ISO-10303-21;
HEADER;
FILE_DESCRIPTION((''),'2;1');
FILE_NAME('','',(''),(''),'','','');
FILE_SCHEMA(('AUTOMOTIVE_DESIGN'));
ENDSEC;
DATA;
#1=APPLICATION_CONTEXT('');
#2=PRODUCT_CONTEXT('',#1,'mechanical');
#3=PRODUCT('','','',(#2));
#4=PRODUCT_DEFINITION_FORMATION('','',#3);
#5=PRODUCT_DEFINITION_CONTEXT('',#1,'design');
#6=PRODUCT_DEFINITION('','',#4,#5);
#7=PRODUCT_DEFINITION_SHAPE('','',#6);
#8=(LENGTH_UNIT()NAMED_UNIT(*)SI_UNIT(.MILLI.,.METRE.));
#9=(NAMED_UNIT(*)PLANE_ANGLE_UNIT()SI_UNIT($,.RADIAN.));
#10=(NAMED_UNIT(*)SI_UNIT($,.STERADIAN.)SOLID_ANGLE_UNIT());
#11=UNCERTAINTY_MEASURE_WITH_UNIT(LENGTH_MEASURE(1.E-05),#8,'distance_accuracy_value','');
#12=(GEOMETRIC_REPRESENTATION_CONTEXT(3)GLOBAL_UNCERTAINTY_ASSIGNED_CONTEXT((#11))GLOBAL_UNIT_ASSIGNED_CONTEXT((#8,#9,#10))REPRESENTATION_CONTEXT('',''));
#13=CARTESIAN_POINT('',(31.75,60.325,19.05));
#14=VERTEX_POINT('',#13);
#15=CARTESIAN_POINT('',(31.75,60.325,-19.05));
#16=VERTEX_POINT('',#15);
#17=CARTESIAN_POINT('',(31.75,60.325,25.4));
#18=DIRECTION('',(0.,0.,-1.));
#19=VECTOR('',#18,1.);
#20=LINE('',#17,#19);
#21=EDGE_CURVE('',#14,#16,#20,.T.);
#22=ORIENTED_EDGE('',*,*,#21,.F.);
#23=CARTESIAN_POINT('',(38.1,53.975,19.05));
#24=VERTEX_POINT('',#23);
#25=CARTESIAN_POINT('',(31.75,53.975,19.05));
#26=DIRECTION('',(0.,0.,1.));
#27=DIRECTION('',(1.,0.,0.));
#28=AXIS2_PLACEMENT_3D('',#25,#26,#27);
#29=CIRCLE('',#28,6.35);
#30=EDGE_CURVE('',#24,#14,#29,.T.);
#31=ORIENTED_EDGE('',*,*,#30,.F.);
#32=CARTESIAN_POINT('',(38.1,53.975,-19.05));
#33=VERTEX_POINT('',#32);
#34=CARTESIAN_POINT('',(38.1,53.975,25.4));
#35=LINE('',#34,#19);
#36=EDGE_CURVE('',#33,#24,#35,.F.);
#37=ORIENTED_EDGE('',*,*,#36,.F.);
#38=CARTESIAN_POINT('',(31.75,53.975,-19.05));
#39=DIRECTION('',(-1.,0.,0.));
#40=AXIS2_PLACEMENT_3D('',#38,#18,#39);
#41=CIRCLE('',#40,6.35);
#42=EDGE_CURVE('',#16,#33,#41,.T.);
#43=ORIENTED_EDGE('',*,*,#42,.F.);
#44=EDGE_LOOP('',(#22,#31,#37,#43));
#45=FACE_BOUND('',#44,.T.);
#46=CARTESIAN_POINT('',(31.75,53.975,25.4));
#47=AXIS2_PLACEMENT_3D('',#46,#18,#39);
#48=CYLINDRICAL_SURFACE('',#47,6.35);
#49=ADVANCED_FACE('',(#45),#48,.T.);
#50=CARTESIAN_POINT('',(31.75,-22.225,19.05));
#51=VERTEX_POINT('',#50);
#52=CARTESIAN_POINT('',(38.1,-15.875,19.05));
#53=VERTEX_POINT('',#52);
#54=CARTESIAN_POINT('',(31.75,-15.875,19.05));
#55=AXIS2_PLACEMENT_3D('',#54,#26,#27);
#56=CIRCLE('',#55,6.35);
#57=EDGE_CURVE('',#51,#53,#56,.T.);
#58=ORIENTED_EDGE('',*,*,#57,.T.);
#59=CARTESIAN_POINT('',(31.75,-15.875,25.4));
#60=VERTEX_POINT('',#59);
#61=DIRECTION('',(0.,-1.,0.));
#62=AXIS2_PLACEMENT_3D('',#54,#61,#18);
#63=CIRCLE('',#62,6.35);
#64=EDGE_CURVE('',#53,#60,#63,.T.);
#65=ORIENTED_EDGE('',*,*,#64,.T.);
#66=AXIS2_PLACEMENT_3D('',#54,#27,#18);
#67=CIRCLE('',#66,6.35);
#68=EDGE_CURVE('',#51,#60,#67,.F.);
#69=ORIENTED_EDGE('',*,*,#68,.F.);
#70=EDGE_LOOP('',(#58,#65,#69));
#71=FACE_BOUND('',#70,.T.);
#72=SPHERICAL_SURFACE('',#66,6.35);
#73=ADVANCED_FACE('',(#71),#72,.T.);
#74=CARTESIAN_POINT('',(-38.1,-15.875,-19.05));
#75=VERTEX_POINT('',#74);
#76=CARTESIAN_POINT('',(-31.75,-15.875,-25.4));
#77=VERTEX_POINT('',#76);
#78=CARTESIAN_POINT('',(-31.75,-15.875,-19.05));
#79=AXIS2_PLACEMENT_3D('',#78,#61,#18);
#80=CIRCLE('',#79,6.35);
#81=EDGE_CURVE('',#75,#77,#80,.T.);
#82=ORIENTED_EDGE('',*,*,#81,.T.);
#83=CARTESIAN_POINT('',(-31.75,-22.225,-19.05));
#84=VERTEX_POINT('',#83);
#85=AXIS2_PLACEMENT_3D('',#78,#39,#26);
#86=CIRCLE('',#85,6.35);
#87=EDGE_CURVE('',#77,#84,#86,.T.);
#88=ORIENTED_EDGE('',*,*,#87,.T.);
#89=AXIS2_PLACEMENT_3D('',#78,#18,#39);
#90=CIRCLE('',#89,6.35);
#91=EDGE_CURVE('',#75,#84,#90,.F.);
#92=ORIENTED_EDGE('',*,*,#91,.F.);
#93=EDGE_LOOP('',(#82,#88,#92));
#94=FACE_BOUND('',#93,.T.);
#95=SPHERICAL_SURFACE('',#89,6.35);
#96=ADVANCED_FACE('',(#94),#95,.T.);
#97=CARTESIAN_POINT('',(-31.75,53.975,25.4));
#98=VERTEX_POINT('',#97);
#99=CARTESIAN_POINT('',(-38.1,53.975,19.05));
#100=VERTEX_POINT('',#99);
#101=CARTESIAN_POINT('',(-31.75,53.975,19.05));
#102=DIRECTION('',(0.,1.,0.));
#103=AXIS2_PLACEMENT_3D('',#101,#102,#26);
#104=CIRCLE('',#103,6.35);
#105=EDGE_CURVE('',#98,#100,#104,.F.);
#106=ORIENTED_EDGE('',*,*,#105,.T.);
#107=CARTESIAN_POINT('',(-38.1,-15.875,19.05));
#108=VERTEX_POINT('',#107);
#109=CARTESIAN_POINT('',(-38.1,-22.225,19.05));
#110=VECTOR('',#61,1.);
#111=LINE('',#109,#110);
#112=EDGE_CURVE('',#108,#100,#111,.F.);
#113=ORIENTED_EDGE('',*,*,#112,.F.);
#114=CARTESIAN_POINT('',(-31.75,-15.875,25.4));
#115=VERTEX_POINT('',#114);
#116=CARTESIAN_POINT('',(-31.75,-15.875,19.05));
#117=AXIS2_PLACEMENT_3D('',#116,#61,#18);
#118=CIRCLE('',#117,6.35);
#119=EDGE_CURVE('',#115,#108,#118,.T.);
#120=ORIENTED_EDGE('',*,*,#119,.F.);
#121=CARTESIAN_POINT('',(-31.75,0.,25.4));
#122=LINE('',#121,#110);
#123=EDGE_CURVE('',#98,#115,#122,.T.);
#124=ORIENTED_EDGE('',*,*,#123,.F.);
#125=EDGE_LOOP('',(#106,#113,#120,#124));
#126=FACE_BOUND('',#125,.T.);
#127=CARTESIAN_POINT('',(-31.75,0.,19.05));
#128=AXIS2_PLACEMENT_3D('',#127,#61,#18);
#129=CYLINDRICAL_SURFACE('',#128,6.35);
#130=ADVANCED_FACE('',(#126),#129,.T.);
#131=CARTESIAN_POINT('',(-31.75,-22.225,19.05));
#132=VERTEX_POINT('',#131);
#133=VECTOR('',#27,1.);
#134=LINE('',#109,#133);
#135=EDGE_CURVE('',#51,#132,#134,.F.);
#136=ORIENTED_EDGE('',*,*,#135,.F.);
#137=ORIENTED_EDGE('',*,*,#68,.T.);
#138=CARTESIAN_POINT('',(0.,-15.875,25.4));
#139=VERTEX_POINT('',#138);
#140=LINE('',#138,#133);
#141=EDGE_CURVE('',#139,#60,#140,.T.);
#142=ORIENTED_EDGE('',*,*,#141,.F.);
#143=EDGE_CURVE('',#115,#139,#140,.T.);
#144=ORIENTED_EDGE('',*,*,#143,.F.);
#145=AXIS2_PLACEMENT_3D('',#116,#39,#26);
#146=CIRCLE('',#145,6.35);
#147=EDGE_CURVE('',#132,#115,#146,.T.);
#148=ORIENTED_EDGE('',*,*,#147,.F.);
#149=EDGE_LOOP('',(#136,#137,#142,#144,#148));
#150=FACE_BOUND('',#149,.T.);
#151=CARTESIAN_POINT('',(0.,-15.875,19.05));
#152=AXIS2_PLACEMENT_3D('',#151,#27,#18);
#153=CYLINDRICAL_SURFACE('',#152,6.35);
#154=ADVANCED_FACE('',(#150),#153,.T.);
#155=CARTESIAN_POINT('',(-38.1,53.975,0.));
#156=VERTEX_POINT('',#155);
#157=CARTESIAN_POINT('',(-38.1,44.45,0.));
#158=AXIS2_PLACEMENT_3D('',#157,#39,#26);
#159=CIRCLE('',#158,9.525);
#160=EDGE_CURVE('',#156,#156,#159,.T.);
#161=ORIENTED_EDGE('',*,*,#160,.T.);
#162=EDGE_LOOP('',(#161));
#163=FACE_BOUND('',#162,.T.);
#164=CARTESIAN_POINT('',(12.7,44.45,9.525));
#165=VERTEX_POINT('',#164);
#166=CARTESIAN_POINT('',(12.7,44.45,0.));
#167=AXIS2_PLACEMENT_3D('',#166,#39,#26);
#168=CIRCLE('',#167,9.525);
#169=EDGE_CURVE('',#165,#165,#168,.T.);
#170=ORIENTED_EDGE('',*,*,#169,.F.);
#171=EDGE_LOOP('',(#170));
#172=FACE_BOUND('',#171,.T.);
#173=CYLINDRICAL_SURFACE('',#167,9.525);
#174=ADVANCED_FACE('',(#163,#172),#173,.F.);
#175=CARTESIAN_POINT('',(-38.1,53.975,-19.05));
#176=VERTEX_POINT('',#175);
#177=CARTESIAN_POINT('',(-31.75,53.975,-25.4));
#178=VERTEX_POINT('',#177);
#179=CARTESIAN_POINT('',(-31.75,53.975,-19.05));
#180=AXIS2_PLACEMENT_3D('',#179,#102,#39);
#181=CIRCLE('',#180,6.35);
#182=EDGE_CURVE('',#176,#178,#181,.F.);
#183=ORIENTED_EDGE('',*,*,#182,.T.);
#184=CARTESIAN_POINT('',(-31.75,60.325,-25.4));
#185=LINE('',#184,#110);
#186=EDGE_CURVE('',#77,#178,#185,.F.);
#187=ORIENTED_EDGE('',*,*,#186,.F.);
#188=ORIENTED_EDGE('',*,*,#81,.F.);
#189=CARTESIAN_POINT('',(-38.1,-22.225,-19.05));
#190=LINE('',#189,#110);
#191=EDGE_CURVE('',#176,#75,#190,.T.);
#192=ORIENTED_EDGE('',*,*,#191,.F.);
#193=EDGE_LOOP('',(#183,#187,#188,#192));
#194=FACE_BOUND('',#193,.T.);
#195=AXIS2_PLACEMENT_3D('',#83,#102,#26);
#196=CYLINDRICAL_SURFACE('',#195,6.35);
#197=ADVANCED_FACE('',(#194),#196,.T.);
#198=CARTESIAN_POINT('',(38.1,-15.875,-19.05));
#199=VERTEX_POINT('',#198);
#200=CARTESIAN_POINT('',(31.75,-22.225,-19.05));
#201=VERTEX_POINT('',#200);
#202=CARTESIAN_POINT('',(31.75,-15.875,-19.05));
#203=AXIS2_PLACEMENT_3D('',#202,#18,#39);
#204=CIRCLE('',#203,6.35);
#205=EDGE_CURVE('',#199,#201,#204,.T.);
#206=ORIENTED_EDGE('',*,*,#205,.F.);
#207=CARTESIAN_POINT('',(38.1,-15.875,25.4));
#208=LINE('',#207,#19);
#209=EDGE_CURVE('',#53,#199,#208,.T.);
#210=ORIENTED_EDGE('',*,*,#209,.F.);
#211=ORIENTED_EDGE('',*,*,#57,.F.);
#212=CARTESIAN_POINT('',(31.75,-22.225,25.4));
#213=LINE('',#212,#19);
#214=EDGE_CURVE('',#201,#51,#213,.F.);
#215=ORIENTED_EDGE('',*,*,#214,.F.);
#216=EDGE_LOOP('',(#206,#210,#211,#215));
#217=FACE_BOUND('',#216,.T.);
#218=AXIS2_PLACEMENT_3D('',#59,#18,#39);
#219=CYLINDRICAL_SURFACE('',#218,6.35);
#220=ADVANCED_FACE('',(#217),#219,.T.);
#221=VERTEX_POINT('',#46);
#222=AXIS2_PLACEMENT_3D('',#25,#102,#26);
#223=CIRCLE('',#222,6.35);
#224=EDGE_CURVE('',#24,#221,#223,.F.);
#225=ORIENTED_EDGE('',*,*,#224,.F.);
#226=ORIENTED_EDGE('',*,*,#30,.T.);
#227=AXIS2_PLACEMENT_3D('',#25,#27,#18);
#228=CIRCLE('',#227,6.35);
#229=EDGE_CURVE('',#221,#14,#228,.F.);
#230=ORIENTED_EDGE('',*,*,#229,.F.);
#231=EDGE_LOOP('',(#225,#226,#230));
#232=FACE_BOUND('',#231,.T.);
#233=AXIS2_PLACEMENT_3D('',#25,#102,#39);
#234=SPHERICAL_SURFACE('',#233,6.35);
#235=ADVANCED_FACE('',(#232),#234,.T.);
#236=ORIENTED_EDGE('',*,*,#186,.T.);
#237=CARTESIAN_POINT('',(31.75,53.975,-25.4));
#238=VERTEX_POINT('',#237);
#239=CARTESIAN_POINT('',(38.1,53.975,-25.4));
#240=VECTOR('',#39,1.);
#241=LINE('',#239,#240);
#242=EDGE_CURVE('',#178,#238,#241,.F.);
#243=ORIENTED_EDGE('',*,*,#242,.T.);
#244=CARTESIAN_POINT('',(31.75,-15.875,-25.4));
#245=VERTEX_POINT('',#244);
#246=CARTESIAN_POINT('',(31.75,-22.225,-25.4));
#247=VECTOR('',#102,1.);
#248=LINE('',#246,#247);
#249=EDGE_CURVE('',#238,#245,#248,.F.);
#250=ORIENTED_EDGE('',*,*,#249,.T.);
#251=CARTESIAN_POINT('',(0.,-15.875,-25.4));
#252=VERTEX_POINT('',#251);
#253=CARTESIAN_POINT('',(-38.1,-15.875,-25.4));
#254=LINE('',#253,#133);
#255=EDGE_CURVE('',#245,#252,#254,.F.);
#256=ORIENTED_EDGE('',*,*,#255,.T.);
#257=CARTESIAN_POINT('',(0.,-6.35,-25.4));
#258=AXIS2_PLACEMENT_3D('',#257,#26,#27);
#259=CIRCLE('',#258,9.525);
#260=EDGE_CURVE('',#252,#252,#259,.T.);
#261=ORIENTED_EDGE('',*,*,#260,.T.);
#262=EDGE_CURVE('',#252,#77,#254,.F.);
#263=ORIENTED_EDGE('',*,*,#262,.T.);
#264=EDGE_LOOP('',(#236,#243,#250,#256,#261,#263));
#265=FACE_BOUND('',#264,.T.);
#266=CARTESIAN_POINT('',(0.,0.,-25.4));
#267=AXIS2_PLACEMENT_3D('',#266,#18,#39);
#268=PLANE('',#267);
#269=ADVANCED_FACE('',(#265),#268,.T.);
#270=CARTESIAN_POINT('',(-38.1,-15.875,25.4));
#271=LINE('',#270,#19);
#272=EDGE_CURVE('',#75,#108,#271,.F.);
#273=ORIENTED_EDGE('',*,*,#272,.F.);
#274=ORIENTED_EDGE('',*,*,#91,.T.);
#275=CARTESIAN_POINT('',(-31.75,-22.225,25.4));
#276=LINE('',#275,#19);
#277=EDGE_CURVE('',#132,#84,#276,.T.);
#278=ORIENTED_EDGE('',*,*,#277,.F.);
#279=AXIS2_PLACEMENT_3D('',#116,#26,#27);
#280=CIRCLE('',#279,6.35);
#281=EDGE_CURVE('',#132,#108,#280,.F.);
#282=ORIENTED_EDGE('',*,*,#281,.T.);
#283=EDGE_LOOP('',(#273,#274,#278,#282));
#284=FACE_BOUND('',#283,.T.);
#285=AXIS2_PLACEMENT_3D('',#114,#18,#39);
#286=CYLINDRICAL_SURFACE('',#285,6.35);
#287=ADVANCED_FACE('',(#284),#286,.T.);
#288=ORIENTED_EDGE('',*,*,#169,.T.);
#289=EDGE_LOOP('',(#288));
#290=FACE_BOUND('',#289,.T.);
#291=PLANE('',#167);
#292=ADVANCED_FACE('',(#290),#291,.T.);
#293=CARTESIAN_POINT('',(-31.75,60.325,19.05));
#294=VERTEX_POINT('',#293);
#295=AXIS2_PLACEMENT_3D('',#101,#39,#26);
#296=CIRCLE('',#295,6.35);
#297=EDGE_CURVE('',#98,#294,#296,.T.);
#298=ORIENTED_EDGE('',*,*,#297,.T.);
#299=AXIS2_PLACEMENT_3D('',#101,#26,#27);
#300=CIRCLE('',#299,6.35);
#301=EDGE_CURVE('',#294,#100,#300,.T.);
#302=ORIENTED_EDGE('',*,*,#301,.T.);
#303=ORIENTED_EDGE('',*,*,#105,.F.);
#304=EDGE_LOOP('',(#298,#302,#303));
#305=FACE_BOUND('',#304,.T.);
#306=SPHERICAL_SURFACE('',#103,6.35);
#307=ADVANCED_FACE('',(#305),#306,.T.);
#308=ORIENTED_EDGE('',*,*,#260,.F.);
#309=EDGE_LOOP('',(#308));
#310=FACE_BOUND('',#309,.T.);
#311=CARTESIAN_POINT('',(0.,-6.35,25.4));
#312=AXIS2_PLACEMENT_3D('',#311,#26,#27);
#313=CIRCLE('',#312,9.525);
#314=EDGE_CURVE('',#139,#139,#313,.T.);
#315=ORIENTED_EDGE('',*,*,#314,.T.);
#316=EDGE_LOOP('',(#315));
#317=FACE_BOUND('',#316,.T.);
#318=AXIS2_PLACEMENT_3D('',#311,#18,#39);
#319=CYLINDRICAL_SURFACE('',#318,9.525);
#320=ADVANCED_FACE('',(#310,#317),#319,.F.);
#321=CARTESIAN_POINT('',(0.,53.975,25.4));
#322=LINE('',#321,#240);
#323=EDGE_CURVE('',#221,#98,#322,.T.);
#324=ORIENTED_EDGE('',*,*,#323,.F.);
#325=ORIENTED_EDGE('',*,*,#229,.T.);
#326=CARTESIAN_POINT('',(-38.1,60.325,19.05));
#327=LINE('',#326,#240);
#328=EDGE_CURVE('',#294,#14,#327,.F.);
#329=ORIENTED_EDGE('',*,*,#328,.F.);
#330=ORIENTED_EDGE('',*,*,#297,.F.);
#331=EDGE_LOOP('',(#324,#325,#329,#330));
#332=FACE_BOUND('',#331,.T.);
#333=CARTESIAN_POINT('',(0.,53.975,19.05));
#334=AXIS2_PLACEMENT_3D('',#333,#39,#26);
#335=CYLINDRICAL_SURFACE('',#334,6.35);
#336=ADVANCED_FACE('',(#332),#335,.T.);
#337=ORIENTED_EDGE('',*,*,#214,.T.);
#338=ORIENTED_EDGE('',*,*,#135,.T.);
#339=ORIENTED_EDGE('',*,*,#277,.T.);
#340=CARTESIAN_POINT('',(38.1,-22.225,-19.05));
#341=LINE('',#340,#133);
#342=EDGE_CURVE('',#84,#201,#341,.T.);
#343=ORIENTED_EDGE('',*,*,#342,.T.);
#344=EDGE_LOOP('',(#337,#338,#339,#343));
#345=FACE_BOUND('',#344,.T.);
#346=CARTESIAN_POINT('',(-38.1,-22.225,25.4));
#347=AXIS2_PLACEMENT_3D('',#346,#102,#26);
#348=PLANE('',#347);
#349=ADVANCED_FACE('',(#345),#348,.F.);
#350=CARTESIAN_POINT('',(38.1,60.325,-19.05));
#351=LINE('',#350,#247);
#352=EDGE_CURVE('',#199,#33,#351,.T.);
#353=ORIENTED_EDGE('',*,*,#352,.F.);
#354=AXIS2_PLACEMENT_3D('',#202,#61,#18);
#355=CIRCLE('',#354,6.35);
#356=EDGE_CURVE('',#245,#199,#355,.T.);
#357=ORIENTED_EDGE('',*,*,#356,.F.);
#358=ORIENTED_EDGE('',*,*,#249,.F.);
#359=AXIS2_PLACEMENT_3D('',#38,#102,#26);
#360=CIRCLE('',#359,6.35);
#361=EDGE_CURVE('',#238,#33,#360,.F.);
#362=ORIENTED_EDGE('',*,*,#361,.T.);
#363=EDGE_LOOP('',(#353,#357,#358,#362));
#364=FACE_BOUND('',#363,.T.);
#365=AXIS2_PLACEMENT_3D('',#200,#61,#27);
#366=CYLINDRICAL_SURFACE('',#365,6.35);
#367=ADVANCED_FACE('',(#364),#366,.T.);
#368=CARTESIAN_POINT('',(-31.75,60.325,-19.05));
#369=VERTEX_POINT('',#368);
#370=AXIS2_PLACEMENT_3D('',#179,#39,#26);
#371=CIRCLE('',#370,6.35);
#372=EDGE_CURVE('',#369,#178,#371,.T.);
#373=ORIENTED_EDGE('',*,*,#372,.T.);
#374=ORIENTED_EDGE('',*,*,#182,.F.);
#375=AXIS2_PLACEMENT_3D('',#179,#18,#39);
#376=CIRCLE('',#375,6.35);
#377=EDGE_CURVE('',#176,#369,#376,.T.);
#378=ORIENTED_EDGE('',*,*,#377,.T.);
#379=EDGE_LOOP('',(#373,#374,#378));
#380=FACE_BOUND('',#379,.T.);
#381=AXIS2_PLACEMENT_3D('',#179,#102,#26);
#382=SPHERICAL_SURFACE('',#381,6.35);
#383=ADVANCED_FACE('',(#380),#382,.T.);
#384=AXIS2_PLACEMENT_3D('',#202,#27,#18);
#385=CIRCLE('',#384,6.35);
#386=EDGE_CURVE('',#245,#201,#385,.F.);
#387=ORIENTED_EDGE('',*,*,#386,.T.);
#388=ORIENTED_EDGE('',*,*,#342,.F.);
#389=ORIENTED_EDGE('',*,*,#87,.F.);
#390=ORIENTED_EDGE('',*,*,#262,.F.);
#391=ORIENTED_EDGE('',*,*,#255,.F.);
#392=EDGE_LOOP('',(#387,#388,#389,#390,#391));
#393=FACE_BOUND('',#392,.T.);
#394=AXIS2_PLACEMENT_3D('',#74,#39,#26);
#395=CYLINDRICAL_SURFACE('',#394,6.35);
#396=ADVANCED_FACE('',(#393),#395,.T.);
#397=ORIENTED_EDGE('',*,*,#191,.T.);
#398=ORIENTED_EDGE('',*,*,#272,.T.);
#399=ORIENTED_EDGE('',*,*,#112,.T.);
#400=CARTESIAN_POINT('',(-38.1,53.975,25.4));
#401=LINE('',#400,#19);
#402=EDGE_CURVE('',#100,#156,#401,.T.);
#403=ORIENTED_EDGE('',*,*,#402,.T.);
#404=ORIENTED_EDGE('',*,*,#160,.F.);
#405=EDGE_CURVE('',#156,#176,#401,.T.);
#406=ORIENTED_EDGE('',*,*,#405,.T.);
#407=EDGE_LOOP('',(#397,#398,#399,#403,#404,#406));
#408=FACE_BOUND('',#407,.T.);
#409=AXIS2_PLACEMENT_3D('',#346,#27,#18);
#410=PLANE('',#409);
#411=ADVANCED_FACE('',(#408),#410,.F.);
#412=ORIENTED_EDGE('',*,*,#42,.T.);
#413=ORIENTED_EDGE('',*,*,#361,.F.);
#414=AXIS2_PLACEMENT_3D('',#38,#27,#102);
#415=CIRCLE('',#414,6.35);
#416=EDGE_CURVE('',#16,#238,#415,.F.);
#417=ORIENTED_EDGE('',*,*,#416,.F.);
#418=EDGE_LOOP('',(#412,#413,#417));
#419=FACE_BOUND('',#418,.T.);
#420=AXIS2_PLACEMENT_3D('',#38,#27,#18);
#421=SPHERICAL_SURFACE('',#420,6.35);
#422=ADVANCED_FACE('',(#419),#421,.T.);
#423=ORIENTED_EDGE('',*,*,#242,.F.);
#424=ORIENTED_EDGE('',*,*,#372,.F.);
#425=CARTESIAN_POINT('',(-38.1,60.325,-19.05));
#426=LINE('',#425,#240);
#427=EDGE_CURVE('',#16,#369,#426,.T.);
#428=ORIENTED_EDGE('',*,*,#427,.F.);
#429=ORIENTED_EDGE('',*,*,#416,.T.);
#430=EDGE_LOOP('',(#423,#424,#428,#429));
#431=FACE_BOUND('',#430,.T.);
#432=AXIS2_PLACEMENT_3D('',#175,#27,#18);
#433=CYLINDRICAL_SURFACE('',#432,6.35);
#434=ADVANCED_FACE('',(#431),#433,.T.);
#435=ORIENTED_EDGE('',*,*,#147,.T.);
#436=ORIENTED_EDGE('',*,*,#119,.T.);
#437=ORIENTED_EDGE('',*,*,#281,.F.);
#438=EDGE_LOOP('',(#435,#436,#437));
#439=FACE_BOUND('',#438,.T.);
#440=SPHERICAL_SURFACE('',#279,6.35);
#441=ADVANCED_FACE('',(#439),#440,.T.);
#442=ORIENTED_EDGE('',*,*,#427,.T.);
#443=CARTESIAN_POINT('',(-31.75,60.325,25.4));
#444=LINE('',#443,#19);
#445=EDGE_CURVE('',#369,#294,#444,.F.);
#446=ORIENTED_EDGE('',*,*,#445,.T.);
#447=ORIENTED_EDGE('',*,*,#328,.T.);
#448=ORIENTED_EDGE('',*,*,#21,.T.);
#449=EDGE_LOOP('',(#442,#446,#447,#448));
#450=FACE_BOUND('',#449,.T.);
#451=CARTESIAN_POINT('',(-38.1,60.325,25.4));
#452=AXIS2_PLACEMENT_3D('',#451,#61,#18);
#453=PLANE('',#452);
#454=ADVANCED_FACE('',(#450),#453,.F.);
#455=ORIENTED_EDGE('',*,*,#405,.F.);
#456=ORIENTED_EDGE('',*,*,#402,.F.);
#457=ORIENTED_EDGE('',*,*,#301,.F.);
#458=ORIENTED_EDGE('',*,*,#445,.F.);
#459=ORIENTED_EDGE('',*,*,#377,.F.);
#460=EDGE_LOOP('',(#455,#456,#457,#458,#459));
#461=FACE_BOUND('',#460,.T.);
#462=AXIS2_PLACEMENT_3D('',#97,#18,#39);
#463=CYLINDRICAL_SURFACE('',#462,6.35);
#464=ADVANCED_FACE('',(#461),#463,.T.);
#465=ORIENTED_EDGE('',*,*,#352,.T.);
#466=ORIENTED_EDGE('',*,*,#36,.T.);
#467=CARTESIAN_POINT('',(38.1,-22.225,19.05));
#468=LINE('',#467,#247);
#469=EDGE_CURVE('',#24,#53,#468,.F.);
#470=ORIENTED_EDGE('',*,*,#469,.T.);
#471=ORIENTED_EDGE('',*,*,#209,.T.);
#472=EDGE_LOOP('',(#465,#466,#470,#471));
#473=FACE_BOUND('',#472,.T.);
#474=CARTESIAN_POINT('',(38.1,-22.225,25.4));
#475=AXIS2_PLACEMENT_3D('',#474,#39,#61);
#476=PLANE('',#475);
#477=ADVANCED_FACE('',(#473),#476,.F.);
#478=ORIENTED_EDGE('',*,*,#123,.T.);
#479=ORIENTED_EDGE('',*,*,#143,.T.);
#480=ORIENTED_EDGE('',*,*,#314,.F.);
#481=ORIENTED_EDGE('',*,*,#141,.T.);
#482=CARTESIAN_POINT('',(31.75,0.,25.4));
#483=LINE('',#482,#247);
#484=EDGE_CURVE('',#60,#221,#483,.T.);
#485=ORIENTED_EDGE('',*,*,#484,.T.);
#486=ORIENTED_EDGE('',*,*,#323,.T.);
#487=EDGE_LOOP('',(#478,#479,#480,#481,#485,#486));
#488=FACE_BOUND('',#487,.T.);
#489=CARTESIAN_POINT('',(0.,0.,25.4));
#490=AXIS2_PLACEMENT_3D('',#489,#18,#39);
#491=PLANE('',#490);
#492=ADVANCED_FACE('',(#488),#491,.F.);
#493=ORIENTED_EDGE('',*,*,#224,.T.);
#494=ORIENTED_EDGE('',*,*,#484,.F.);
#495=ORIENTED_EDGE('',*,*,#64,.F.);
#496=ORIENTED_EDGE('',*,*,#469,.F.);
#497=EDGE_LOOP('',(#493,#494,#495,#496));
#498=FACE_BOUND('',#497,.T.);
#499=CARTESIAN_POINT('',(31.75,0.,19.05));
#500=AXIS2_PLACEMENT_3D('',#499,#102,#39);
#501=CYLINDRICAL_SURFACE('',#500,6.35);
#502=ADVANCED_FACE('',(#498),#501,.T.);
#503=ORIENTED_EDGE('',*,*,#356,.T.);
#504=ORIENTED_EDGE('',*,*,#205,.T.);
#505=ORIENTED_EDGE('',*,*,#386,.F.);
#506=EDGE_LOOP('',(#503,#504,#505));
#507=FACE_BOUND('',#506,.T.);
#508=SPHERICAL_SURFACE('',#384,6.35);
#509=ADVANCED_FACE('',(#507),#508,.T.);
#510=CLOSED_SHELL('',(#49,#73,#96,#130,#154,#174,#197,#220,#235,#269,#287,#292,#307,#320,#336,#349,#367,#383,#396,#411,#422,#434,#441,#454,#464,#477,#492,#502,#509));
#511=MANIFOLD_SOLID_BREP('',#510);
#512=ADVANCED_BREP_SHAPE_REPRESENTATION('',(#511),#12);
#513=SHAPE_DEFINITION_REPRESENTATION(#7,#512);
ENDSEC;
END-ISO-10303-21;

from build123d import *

# Parameters (mm, degrees)
SKETCH1_W           = 76.2
SKETCH1_H           = 82.55
SKETCH1_R           = 9.525
BOSS_EXTRUDE1_DEPTH = 25.4
SKETCH2_R           = 9.525
CUT_EXTRUDE1_DEPTH  = 50.8
FILLET1_R           = 6.35


with BuildPart() as part:
    # Sketch1 → Boss-Extrude1 (new, symmetric)
    with BuildSketch(Plane.XY):
        with Locations((0, 19.05)):
            Rectangle(SKETCH1_W, SKETCH1_H)
        with Locations((0, -6.35)):
            Circle(SKETCH1_R, mode=Mode.SUBTRACT)
    extrude(amount=BOSS_EXTRUDE1_DEPTH, both=True)

    # Sketch2 → Cut-Extrude1 (cut)
    with BuildSketch(Plane.ZY.offset(38.1)):
        with Locations((0, 44.45)):
            Circle(SKETCH2_R)
    extrude(amount=-CUT_EXTRUDE1_DEPTH, mode=Mode.SUBTRACT)

    # Fillet1
    fillet1_edges = [part.edges().sort_by_distance(p)[0] for p in [
        (-38.1, 19.05, 25.4),
        (0, -22.225, 25.4),
        (38.1, 19.05, 25.4),
        (0, -22.225, -25.4),
        (-38.1, 19.05, -25.4),
        (0, 60.325, -25.4),
        (38.1, 19.05, -25.4),
        (38.1, -22.225, 0),
        (-38.1, -22.225, 0),
        (-38.1, 60.325, 0),
        (38.1, 60.325, 0),
        (0, 60.325, 25.4),
    ]]
    fillet(fillet1_edges, radius=FILLET1_R - 0.0001)  # a hair under: the kernel refuses the full size


solid = part.part
